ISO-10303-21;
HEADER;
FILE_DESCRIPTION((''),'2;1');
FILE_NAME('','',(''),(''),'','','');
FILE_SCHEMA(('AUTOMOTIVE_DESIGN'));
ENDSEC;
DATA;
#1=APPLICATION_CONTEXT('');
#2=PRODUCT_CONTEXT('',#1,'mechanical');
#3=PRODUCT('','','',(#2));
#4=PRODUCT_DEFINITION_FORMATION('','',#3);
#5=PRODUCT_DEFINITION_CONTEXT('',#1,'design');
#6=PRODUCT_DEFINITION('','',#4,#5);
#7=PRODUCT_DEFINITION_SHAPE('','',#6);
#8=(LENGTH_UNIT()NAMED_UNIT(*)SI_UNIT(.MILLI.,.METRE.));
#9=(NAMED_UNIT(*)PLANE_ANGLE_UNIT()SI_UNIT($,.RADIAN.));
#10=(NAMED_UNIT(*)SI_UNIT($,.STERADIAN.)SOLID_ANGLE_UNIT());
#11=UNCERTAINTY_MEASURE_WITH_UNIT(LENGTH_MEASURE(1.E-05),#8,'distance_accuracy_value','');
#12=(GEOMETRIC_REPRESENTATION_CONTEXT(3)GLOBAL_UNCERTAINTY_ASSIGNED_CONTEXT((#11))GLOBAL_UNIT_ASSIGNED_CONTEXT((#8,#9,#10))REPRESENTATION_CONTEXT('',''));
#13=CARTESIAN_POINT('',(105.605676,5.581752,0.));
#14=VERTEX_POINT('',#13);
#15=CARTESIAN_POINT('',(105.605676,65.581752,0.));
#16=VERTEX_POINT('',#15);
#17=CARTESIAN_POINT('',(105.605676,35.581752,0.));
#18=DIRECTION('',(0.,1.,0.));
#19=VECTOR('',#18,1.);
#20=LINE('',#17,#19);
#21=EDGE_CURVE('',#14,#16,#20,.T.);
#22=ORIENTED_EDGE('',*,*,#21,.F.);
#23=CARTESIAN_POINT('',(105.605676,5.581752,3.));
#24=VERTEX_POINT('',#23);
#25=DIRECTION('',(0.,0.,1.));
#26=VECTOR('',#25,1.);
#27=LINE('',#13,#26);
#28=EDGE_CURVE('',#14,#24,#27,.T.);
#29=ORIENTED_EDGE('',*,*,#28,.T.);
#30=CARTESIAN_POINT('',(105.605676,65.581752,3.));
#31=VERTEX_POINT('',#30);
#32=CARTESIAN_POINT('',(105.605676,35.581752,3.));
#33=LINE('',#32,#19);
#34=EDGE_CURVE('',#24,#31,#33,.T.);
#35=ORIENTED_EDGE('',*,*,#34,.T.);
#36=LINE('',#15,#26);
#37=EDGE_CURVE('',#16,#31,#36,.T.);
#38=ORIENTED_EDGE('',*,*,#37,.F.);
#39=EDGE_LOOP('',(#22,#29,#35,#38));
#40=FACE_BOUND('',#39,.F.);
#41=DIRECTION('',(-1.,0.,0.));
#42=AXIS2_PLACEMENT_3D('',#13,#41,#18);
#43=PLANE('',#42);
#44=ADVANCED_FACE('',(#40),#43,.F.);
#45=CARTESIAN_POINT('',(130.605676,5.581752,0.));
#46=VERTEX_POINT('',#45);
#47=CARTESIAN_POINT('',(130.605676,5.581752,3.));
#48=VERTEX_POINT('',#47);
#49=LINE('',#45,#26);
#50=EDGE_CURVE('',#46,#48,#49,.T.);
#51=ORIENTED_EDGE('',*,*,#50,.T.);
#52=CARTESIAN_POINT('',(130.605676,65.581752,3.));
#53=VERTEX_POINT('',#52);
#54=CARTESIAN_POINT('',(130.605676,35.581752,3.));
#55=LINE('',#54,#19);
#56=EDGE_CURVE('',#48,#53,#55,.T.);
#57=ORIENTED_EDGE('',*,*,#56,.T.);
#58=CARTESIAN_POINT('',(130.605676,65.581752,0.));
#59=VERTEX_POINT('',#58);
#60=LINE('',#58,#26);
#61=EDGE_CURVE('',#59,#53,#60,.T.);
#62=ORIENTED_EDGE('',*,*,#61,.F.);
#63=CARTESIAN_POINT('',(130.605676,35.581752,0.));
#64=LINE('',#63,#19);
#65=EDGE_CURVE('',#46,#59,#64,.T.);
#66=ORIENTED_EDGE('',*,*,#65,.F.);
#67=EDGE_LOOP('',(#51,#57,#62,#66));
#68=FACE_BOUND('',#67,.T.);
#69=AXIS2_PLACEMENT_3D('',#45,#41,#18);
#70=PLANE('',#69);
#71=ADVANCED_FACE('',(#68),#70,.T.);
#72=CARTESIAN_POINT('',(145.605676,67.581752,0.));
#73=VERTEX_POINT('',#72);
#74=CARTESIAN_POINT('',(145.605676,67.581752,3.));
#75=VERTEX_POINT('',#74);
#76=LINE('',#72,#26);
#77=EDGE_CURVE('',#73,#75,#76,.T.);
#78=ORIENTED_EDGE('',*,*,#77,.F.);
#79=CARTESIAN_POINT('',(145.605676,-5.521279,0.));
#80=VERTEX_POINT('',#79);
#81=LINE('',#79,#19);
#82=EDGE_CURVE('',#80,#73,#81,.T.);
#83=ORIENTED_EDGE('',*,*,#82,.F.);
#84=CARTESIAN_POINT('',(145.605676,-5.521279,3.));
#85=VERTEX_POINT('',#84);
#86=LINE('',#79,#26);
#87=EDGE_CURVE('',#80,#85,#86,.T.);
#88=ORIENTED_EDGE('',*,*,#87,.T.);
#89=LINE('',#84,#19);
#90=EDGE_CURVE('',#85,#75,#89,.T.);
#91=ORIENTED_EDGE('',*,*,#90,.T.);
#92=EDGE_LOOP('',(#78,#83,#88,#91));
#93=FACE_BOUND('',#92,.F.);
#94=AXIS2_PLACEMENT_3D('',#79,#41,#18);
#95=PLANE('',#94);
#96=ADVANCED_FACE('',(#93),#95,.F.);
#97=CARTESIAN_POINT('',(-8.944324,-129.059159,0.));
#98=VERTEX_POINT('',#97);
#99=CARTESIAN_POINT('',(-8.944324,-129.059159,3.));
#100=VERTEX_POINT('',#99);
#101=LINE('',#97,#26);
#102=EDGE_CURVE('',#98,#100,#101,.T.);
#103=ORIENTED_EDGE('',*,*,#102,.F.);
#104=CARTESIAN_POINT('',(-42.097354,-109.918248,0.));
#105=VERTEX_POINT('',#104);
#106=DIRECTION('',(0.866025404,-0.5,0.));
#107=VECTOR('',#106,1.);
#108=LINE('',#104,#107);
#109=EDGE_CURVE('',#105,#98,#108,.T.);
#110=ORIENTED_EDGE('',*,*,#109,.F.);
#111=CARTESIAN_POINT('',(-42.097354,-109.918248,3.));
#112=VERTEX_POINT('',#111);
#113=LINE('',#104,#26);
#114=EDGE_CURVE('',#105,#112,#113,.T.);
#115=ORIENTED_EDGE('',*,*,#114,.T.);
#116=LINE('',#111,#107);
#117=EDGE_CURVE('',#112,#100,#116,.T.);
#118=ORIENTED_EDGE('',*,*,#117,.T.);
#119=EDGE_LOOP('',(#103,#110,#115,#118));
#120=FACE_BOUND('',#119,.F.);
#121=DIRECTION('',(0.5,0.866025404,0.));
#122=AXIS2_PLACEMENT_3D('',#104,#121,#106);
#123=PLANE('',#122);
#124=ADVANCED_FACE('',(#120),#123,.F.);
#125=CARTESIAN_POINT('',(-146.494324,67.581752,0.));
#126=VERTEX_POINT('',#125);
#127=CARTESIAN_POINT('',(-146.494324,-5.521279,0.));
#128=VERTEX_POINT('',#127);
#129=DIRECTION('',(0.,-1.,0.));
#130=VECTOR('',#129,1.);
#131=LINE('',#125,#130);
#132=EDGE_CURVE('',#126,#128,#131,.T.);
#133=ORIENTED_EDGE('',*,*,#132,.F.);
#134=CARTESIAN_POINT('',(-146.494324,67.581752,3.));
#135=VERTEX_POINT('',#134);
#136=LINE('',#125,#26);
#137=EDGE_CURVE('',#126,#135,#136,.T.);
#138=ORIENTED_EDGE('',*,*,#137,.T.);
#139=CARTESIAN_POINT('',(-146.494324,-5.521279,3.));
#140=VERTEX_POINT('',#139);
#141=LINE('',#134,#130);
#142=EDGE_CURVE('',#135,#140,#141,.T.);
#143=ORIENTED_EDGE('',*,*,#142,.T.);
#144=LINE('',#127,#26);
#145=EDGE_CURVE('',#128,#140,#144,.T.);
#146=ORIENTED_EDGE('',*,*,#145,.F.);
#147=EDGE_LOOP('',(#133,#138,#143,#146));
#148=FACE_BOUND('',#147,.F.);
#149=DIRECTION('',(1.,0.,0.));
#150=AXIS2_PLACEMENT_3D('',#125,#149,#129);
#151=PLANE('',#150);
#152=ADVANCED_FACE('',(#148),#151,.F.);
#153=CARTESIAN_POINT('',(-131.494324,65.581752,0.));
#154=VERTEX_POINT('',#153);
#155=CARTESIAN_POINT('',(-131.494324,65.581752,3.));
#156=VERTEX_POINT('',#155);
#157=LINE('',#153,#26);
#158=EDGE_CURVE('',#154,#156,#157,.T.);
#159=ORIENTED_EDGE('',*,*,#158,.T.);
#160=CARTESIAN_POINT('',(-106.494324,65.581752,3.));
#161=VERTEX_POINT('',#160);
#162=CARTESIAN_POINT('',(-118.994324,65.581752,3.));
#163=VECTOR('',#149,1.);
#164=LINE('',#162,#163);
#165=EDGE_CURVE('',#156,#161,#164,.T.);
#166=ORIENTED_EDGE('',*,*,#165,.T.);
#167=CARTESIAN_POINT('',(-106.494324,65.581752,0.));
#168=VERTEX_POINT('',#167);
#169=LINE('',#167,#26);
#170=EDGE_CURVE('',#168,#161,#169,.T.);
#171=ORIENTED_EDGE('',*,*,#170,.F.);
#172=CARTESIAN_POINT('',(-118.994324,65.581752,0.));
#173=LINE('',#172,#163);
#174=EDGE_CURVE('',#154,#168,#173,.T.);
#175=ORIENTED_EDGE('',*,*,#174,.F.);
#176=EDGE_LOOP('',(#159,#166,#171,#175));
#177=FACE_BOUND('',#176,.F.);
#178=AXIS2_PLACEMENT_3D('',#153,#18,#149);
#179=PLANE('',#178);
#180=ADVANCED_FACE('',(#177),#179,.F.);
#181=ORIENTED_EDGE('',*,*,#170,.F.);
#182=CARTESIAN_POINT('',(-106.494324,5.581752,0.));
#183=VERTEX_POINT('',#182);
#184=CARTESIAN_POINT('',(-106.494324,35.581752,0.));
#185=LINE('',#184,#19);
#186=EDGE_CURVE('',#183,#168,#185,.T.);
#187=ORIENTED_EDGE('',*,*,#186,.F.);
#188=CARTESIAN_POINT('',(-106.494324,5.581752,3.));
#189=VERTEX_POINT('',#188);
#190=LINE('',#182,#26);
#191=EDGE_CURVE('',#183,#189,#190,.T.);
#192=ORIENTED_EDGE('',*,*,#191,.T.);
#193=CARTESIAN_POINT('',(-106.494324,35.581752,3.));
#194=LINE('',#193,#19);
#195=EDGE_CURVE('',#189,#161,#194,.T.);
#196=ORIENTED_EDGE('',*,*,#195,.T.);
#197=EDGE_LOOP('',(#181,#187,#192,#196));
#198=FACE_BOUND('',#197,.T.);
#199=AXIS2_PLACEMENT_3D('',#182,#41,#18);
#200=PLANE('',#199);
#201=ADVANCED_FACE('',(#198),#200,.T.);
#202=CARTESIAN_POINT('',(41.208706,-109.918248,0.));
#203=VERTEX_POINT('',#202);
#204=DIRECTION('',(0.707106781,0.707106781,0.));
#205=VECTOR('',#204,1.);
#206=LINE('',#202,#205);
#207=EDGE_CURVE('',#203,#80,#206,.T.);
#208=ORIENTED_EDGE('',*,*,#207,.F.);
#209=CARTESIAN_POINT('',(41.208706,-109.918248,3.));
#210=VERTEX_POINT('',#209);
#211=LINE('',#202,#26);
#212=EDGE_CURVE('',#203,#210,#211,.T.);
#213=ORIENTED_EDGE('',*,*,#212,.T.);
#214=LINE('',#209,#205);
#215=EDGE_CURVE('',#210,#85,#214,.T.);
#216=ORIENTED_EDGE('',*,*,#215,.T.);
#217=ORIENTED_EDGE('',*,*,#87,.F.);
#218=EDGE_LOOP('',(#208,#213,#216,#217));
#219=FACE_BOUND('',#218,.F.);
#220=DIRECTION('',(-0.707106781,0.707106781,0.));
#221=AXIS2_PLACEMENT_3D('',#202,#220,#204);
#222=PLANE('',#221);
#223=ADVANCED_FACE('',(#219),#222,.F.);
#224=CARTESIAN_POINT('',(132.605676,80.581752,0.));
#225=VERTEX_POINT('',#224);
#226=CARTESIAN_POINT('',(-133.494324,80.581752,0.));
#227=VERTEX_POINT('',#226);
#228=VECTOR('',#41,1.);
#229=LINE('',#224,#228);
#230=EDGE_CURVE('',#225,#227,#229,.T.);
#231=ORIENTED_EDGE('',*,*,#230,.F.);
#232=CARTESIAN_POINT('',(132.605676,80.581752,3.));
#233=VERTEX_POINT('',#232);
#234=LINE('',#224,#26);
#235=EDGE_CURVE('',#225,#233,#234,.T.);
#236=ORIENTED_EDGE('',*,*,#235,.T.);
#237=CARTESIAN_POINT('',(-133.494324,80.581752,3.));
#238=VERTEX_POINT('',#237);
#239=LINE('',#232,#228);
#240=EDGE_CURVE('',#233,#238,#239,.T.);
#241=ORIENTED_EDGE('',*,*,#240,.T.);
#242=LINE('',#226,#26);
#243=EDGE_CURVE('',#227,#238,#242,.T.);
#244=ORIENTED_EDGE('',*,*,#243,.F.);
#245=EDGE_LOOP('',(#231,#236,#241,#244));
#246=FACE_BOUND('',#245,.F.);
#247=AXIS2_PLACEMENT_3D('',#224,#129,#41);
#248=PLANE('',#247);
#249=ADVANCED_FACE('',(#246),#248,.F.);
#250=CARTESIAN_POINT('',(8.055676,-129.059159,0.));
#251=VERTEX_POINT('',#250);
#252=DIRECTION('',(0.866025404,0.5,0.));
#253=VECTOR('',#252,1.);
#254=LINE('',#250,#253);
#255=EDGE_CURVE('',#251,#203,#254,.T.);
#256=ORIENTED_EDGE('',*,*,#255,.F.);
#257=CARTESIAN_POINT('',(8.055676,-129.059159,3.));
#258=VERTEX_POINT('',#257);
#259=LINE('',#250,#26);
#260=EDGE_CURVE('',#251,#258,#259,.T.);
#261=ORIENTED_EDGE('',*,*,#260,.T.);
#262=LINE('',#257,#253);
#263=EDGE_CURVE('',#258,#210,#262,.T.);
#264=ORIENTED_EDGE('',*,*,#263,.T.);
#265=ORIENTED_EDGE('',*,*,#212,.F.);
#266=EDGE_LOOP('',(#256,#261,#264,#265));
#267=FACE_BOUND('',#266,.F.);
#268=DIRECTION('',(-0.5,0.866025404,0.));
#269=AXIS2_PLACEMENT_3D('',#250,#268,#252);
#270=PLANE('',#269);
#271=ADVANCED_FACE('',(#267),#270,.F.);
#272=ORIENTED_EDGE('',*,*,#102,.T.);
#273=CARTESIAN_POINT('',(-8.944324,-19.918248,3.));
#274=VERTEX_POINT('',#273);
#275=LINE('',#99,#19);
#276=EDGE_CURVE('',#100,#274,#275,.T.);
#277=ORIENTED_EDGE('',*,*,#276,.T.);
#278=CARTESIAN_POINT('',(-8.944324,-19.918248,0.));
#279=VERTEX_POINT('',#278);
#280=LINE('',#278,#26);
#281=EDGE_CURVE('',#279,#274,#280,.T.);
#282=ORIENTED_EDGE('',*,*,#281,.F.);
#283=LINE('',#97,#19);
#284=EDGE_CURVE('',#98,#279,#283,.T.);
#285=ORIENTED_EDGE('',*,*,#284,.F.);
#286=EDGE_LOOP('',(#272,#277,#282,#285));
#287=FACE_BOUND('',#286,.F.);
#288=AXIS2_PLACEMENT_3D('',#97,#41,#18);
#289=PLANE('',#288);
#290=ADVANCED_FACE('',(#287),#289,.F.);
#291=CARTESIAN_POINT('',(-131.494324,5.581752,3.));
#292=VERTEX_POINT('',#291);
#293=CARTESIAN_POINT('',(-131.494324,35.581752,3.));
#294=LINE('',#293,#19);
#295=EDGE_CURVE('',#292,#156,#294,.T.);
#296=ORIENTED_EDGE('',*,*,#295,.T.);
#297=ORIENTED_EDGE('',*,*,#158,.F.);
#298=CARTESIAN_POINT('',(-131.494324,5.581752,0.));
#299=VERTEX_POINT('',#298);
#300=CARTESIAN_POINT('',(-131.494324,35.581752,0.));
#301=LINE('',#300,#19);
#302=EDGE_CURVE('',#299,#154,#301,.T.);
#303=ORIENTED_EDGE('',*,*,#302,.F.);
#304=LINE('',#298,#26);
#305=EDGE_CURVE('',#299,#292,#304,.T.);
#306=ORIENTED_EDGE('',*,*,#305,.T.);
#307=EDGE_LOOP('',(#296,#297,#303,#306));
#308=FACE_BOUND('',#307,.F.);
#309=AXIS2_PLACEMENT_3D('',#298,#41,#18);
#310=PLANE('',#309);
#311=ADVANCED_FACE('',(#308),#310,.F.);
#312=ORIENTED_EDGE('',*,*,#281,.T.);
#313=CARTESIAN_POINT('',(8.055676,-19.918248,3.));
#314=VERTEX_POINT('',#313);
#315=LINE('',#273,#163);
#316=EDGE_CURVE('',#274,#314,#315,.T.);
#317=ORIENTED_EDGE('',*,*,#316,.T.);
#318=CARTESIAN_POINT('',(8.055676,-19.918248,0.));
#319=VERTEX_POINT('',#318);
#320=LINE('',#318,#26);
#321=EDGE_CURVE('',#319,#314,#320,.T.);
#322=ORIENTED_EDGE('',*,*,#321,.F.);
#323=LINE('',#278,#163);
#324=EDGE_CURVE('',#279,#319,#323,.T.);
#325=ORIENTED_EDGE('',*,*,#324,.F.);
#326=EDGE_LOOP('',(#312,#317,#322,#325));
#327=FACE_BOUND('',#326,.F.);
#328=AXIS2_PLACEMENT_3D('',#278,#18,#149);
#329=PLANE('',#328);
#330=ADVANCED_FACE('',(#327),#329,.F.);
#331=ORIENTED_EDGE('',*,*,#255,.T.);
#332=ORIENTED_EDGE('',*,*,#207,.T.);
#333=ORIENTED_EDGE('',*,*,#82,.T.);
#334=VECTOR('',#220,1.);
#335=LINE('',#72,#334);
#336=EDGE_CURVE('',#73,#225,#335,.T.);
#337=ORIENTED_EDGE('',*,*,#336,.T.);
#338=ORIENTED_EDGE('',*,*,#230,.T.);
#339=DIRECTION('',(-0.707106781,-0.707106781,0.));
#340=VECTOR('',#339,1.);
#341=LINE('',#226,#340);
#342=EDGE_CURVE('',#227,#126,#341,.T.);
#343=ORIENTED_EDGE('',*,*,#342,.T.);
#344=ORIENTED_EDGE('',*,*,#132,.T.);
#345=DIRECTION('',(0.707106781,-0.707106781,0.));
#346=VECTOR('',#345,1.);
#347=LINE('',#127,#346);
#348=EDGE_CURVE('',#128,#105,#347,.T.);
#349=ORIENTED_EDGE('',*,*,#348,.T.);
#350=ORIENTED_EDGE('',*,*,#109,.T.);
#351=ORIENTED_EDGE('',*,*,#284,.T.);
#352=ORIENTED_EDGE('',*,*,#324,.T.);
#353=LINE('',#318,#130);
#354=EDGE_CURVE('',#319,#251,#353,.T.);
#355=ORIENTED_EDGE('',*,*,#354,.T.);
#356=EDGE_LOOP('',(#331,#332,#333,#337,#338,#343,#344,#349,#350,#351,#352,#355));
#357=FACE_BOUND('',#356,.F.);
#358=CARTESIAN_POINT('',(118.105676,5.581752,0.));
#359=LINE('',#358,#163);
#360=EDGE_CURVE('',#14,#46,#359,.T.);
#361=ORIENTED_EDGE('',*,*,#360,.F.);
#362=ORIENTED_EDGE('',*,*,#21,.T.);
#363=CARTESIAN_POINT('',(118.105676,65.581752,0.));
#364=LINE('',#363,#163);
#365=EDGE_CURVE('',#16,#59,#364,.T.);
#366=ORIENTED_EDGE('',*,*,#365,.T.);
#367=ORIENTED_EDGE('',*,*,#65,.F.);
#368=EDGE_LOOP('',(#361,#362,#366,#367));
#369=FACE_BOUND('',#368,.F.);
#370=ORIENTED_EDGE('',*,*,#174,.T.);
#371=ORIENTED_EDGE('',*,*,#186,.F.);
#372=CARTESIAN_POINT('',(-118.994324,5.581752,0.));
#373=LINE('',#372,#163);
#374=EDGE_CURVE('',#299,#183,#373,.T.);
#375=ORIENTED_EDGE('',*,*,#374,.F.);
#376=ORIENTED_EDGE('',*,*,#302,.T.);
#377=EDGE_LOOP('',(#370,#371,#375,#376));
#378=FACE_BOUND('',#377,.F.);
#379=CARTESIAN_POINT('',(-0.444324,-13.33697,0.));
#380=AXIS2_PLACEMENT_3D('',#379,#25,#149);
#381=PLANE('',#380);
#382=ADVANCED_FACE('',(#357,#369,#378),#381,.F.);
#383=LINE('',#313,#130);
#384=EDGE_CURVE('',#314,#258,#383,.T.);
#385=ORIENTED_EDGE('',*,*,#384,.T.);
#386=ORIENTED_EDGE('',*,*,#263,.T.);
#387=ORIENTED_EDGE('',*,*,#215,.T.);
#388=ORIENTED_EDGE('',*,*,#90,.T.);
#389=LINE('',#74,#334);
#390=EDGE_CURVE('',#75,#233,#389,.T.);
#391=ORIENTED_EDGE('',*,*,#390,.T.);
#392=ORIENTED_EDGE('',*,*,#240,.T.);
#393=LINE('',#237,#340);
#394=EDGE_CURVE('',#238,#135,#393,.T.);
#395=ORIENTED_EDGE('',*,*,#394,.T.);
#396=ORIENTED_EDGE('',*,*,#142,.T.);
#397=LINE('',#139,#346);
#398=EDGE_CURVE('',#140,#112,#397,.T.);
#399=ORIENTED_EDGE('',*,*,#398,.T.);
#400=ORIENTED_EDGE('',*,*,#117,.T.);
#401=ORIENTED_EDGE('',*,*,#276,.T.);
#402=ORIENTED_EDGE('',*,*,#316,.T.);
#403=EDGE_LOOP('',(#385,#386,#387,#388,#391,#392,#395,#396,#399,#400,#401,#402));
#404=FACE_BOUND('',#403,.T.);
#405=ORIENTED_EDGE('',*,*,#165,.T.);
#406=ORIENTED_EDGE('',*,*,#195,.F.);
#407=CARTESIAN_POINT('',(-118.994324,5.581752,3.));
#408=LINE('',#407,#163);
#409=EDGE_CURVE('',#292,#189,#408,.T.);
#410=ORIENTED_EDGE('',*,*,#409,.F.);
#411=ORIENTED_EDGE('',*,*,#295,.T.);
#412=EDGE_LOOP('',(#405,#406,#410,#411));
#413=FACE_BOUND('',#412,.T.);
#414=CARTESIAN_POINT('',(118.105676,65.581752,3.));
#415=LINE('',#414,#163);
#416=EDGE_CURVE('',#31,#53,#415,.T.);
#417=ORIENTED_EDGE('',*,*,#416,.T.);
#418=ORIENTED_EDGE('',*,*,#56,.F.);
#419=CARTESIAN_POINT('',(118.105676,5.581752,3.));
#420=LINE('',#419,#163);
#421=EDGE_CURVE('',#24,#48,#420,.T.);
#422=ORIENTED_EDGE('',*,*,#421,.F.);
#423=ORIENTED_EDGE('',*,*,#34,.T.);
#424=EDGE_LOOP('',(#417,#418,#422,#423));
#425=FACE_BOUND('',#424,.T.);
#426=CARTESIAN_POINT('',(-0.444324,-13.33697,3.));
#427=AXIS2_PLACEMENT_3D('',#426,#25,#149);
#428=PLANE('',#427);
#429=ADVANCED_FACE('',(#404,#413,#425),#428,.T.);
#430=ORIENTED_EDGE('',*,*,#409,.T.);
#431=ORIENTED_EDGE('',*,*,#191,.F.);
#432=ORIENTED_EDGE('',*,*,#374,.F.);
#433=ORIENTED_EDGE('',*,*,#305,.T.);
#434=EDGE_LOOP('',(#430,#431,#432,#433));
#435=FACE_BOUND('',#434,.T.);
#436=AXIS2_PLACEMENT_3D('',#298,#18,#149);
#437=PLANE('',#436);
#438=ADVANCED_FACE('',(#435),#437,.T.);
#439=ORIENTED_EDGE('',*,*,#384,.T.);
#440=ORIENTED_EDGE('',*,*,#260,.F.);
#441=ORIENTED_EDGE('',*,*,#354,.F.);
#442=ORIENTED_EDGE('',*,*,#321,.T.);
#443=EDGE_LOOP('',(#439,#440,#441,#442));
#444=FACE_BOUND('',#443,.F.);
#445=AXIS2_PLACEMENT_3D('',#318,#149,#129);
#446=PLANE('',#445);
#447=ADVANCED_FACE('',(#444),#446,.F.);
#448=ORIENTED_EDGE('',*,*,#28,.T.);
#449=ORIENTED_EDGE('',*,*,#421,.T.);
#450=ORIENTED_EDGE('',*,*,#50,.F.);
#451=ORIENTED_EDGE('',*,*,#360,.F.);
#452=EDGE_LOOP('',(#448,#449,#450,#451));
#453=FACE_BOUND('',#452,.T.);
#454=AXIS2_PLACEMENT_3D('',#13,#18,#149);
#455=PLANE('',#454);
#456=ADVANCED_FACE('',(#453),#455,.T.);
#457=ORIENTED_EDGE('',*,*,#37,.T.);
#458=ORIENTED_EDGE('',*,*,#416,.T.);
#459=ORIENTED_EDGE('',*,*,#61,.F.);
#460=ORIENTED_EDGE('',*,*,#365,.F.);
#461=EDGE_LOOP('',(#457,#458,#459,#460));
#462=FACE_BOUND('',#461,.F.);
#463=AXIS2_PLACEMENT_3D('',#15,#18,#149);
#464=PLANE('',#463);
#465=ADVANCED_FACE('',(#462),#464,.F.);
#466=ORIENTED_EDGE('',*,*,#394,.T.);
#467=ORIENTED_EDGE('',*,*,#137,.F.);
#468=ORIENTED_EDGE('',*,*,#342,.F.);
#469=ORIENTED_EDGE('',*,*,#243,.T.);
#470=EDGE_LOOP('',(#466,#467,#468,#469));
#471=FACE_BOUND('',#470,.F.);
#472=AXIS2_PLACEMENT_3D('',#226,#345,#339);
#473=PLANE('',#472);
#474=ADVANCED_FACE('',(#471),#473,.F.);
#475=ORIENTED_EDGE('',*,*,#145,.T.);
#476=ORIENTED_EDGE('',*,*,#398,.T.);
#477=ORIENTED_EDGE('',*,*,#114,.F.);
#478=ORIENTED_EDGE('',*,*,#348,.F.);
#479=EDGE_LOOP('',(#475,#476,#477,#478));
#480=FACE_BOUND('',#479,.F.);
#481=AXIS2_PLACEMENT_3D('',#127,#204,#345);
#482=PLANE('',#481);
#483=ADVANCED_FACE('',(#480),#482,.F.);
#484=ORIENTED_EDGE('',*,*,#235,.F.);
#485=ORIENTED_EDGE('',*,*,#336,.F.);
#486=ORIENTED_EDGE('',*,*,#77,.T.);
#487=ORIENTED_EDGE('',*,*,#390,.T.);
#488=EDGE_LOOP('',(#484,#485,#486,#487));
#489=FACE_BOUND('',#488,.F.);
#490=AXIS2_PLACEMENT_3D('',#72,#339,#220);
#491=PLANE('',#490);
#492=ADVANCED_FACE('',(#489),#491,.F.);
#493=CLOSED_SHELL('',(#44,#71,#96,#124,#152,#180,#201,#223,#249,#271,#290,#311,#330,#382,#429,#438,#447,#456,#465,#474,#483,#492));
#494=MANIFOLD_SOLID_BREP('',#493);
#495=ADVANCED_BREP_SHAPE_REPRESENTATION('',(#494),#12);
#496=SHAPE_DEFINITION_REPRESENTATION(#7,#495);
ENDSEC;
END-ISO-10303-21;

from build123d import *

# Parameters (mm, degrees)
F0_W     = 25
F0_H     = 60
F1_DEPTH = 3


# Not quite as in the source:
# - a feature names something its author has since deleted; it is built from what else it names


with BuildPart() as f1:
    # F0 (on Top) → F1 (new body)
    with BuildSketch(Plane.XY):
        Polygon((132.6056759823, 80.5817515949), (-133.4943240177, 80.5817515949), (-146.4943240177, 67.5817515949), (-146.4943240177, -5.5212787854), (-42.0973543981, -109.9182484051), (-8.9443240177, -129.0591594196), (-8.9443240177, -19.9182484051), (8.0556759823, -19.9182484051), (8.0556759823, -129.0591594196), (41.2087063626, -109.9182484051), (145.6056759823, -5.5212787854), (145.6056759823, 67.5817515949), align=None)
        with Locations((-118.9943240177, 35.5817515949)):
            Rectangle(F0_W, F0_H, mode=Mode.SUBTRACT)
        with Locations((118.1056759823, 35.5817515949)):
            Rectangle(F0_W, F0_H, mode=Mode.SUBTRACT)
    extrude(amount=F1_DEPTH)


solid = f1.part
